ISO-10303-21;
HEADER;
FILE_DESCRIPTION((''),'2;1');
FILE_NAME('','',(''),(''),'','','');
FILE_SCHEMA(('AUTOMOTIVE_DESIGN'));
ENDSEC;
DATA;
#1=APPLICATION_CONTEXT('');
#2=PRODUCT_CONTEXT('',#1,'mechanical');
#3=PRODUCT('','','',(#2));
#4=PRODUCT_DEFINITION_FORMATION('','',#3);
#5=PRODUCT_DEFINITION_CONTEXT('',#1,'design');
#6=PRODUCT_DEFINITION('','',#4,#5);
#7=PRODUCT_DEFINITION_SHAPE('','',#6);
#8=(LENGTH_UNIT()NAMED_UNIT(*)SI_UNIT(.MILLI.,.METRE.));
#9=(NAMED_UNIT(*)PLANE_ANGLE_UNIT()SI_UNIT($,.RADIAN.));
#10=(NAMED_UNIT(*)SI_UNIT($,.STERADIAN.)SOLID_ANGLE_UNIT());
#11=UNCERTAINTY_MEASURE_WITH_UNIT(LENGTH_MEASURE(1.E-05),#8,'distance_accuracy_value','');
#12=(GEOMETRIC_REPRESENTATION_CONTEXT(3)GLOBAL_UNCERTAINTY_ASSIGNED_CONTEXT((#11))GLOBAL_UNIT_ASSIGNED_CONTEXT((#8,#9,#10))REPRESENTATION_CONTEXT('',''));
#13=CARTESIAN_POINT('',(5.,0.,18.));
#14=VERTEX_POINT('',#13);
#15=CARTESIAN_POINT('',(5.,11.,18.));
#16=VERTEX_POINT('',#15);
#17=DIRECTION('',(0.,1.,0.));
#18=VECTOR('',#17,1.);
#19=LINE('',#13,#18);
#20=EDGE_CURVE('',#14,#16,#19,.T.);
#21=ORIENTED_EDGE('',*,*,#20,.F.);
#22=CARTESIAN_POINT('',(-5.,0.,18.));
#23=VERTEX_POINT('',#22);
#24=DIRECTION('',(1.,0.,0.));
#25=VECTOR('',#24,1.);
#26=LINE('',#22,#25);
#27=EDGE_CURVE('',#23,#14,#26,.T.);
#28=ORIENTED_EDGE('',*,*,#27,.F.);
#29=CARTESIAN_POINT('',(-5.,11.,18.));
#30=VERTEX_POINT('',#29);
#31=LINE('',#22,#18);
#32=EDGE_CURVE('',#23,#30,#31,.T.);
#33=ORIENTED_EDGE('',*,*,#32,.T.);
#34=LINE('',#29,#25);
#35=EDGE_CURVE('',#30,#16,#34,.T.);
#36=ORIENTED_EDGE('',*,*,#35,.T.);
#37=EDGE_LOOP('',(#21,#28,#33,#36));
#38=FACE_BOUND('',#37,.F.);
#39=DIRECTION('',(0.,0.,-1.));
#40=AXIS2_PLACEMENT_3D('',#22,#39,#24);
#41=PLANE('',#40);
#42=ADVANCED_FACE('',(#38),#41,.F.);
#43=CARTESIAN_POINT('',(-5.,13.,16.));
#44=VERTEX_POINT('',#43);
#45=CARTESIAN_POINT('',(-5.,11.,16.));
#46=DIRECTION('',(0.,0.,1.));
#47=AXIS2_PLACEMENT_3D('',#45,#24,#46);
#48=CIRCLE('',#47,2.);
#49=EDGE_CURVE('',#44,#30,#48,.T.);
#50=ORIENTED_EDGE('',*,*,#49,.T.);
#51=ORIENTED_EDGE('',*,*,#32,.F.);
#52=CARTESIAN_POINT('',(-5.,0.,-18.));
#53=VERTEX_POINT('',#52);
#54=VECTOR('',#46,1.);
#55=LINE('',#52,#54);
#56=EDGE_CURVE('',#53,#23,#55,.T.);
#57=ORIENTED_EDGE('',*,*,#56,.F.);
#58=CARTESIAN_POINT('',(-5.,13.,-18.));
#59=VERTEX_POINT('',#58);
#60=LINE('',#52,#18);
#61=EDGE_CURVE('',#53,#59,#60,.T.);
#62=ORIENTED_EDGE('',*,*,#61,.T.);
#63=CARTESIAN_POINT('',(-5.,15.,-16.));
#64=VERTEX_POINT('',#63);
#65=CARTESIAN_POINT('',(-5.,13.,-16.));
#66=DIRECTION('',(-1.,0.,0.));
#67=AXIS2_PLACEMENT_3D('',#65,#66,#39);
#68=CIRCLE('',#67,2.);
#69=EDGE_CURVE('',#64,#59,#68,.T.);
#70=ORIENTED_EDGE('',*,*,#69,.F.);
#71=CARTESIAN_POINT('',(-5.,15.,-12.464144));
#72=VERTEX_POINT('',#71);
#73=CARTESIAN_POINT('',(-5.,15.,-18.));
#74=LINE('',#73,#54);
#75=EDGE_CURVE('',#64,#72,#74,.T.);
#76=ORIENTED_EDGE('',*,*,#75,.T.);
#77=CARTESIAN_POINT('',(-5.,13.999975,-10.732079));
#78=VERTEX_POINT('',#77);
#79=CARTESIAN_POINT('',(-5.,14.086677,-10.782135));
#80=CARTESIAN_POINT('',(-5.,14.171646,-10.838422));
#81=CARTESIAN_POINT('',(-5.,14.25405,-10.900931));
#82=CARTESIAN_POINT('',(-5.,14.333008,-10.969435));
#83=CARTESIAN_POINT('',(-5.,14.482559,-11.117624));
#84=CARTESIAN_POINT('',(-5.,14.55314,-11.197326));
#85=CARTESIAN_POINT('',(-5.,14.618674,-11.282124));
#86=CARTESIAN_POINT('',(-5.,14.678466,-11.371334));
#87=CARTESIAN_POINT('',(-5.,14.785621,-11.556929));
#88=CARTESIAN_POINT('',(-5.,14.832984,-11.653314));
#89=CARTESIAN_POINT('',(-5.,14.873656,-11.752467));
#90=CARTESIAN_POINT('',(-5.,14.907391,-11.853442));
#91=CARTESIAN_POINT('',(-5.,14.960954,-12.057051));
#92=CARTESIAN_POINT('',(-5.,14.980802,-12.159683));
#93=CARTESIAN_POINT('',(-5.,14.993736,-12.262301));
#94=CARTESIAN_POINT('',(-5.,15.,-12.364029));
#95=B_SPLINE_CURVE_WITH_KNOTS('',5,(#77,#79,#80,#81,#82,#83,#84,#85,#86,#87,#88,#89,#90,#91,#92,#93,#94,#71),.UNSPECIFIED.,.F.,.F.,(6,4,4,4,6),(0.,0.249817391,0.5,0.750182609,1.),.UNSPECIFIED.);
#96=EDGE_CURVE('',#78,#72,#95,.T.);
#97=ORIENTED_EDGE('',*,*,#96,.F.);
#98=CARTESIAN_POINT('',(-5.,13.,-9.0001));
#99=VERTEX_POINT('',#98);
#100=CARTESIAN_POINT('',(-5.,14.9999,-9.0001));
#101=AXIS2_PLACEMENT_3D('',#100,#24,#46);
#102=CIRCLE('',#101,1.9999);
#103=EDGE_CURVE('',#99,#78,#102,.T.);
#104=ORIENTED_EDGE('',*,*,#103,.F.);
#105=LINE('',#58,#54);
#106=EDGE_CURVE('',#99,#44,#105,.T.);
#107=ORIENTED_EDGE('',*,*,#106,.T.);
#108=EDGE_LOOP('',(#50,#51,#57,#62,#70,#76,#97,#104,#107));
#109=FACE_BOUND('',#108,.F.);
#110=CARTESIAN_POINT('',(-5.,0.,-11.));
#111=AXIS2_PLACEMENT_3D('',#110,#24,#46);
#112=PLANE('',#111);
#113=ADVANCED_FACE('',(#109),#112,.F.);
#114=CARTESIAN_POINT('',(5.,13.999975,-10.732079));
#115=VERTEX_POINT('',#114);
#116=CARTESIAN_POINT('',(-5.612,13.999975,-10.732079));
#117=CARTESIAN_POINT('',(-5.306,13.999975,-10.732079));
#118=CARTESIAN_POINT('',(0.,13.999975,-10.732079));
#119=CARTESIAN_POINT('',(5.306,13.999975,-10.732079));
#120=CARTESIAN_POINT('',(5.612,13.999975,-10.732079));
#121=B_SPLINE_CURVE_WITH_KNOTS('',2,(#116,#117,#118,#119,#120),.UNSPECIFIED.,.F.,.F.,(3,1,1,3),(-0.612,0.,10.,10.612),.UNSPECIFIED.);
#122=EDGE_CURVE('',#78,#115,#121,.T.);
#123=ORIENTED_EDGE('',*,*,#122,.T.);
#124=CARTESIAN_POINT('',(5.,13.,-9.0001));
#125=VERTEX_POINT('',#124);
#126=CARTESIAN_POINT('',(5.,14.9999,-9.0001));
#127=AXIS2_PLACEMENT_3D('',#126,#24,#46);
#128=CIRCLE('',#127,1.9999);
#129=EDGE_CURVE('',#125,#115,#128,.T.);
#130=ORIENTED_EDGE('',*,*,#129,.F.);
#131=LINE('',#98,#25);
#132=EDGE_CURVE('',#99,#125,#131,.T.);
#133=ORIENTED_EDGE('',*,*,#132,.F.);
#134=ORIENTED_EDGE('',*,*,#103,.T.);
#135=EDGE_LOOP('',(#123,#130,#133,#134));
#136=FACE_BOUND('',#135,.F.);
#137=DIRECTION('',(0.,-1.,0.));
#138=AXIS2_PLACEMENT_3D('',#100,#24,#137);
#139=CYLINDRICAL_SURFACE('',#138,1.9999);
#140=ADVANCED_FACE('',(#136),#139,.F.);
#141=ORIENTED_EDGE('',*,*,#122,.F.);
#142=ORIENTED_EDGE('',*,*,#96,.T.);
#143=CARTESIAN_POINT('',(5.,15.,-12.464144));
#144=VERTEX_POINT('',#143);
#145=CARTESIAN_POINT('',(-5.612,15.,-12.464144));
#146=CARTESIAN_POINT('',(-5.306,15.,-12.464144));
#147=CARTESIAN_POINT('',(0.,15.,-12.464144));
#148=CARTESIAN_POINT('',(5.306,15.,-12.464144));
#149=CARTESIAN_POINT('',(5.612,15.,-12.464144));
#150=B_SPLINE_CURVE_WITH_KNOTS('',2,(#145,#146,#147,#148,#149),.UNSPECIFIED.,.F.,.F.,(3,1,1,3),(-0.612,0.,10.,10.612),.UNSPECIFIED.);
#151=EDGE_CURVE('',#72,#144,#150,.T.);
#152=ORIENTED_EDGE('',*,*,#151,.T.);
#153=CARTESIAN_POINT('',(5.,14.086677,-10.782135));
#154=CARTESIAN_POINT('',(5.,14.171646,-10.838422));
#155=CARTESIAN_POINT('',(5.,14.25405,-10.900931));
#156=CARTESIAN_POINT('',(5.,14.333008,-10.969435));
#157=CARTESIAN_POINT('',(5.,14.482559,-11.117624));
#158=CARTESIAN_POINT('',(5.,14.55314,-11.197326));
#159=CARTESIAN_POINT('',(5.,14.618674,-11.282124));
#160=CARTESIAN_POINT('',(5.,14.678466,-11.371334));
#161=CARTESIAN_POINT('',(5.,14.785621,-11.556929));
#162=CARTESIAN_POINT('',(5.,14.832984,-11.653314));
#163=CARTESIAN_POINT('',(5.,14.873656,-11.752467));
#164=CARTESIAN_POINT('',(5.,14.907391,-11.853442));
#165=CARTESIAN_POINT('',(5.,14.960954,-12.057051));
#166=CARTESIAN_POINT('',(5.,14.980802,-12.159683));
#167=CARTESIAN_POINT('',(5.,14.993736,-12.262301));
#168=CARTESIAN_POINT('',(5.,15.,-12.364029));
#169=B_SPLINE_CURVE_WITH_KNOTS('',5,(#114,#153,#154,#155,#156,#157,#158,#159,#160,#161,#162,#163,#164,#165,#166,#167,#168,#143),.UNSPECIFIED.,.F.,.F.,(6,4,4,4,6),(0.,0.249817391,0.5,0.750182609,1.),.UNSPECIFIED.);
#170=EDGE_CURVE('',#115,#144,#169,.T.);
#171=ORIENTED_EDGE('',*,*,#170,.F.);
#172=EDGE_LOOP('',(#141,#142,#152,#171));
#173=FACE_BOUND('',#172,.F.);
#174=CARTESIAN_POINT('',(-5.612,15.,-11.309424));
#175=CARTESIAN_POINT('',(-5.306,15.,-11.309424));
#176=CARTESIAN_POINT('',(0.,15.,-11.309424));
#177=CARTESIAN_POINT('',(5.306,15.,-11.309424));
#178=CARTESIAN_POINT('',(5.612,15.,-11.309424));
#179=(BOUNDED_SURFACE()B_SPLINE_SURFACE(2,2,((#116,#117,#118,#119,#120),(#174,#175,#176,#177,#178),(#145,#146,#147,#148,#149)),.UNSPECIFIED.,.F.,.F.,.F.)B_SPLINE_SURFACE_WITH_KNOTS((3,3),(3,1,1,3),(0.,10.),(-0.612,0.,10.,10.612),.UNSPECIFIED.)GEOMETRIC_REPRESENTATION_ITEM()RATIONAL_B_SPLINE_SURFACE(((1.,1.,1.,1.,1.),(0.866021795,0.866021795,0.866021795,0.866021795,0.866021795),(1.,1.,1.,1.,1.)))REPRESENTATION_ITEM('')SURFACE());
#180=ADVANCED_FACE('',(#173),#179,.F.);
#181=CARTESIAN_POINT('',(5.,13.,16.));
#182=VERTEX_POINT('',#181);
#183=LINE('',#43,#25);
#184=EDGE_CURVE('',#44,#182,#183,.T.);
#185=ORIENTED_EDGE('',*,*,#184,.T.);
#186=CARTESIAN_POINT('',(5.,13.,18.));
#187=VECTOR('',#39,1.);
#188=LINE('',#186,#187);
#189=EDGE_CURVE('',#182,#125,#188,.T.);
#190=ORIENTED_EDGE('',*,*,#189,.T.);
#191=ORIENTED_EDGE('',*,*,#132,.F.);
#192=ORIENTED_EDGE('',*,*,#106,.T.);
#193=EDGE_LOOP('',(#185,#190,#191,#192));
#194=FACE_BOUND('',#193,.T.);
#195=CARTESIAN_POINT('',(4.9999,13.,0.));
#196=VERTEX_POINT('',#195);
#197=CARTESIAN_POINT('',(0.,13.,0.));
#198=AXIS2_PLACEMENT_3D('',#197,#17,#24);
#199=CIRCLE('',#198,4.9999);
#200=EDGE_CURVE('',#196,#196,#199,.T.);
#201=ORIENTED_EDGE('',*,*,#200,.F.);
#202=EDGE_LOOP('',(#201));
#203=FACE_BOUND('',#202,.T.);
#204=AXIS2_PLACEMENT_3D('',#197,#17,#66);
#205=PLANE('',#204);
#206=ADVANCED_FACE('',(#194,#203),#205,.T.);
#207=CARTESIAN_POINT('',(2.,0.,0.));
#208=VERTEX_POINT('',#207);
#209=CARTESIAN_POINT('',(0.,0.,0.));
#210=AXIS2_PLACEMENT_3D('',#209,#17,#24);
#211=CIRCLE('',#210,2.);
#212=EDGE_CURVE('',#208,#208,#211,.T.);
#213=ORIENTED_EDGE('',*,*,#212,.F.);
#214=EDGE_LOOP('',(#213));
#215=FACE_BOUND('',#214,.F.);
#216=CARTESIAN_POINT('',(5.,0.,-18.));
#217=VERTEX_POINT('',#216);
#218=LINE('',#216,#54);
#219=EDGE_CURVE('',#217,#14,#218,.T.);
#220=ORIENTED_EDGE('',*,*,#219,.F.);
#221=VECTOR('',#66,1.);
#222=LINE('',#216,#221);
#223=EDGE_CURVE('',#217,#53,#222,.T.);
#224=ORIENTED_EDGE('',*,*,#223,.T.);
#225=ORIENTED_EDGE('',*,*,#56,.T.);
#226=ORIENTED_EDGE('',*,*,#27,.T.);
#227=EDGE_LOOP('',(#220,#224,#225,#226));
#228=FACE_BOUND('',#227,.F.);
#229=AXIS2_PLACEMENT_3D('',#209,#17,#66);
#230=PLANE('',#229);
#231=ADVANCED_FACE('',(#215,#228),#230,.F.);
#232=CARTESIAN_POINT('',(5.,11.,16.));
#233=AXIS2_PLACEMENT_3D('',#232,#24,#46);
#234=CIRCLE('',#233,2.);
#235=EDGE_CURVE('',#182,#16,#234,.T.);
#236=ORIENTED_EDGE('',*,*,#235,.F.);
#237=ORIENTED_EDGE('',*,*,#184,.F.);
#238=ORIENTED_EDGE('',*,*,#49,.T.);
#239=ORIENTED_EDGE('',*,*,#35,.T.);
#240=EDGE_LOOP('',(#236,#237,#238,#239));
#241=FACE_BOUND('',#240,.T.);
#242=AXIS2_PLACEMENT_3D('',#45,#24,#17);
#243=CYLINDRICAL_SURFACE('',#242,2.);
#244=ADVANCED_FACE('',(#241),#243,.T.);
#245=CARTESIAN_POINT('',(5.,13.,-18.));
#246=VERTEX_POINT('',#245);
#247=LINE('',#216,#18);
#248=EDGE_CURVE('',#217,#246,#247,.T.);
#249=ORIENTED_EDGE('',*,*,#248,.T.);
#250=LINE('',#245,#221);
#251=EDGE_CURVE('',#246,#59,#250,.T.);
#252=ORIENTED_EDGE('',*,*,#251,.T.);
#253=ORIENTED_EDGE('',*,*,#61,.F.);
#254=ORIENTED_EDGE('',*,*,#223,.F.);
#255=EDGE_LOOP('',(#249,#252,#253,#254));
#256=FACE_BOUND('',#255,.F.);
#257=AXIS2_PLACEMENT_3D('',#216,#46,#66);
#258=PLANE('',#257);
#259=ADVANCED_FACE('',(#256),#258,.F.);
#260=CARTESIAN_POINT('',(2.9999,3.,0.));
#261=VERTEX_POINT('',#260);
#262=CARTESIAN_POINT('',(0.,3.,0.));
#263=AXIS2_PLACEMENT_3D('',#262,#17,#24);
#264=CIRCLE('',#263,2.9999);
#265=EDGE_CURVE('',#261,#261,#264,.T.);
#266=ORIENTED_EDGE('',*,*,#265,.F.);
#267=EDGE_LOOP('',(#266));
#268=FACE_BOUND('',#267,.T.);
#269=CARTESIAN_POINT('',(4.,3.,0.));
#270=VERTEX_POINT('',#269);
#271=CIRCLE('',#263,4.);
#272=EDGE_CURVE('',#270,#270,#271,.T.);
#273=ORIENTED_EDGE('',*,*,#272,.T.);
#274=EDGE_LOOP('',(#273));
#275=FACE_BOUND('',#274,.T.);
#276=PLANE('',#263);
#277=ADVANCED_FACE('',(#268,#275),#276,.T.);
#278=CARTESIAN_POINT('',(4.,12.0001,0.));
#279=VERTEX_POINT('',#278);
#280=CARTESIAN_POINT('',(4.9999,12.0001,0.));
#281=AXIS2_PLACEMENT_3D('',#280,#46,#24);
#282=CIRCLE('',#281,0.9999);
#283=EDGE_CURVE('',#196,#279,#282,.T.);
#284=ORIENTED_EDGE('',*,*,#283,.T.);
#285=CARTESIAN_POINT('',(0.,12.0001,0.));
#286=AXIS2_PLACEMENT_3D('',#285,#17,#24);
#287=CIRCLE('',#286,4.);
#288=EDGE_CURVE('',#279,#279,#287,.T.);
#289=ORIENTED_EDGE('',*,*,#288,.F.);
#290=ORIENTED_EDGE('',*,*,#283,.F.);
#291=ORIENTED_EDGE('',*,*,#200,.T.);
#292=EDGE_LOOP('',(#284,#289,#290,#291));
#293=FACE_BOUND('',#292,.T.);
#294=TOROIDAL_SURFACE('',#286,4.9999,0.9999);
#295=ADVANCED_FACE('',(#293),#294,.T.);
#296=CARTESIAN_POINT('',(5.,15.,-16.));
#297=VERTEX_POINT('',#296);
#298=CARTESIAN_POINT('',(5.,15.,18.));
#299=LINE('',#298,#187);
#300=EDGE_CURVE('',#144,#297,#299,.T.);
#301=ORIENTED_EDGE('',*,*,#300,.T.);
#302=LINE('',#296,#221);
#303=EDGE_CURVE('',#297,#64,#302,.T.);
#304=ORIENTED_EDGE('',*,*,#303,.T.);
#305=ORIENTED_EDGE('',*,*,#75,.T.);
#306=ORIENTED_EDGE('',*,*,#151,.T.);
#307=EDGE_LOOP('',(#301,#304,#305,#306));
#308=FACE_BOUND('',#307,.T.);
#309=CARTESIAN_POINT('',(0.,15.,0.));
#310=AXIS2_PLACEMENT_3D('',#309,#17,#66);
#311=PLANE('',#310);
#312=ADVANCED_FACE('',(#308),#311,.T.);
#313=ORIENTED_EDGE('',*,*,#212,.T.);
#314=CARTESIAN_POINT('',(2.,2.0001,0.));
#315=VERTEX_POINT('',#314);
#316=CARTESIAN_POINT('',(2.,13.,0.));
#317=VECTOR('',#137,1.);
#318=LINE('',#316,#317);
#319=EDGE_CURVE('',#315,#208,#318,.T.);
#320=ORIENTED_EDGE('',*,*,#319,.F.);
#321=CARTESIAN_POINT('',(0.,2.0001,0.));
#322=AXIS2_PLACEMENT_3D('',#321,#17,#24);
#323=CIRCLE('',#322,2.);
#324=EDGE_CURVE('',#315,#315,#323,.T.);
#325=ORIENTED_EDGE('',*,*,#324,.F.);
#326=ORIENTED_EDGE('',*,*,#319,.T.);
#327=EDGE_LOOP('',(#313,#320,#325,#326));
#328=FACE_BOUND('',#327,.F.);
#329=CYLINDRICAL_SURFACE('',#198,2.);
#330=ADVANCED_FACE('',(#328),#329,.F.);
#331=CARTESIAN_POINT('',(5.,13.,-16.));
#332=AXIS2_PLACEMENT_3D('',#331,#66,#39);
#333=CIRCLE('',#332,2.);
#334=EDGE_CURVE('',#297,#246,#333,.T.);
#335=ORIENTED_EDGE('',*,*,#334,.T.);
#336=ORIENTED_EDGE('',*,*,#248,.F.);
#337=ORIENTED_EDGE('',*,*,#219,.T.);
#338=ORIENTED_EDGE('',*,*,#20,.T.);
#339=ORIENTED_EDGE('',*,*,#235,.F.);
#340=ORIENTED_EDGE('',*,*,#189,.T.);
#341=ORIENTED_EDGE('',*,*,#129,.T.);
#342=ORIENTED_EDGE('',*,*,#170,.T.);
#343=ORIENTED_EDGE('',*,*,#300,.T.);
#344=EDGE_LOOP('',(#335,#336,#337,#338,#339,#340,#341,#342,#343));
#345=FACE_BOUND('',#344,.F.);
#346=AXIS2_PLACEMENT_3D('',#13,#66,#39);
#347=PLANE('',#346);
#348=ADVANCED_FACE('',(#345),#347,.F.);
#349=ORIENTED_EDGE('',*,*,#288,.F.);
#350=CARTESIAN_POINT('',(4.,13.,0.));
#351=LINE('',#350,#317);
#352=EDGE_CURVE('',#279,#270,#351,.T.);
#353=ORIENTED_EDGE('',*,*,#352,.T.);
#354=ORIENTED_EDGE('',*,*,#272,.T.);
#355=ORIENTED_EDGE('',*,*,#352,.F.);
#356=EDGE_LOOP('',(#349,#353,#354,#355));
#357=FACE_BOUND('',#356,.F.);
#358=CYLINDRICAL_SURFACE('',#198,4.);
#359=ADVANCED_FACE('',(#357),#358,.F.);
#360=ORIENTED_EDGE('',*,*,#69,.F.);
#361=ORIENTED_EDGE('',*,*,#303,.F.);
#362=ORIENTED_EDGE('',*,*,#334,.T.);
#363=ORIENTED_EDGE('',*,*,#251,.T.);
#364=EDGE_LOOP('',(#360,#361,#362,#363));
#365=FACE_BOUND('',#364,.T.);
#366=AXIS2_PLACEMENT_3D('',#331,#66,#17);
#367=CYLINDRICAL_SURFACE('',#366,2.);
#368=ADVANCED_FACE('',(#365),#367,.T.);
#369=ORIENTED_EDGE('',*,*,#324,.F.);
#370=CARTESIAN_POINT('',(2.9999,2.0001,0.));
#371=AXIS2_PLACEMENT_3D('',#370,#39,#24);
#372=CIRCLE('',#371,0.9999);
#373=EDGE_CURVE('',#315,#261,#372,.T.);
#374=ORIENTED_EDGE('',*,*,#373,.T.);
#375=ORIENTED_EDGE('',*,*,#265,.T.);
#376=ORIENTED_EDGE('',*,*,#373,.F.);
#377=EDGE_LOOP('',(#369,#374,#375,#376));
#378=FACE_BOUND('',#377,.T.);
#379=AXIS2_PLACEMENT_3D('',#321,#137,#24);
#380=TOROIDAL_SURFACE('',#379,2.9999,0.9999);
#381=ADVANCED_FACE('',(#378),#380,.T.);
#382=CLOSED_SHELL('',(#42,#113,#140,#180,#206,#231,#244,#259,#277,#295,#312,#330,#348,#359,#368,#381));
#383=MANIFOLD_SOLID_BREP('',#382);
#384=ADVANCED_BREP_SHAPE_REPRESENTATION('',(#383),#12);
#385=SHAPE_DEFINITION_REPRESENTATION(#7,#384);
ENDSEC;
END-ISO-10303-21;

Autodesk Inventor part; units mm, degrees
ref_plane "YZ Plane" through (0, 0, 0) normal (1, 0, 0) x (0, 1, 0)
ref_plane "XZ Plane" through (0, 0, 0) normal (0, 1, 0) x (-1, 0, 0)
ref_plane "XY Plane" through (0, 0, 0) normal (0, 0, 1) x (1, 0, 0)
sketch "Sketch1" plane through (0, 0, 0) normal (0, 1, 0) x (-1, 0, 0)
  line L0 (5, 18) -> (-5, 18)
  line L1 (-5, 18) -> (-5, -18)
  line L2 (-5, -18) -> (5, -18)
  line L3 (5, -18) -> (5, 18)
  line L4 (5, 18) -> (-5, -18) construction
  line L5 (-5, 18) -> (5, -18) construction
  line L6 (5, -18) -> (5, -11)
  line L7 (5, -11) -> (-5, -11)
  point P0 (0, 0)
  dimension "d0" = 10
  dimension "d1" = 36
  dimension "d2" = 7
extrude "Extrusion1" add sketch "Sketch1" along normal blind 13 contours L3 L7 L1 L0
extrude "Extrusion2" add sketch "Sketch1" along normal blind 15 contours L3 L2 L1 L7
fillet "Fillet1" radius 2 4 edges at (0, 15, -11) (0, 13, -11) (0, 15, -18) (0, 13, 18)
sketch "Sketch2" plane through (0, 13, 0) normal (0, 1, 0) x (1, 0, 0)
  circle A0 centre (0, 0) radius 4
  circle A1 centre (0, 0) radius 2
  dimension "d8" = 8
  dimension "d9" = 4
extrude "Extrusion3" cut sketch "Sketch2" against normal blind 15 contours A1
extrude "Extrusion4" cut sketch "Sketch2" against normal blind 10
fillet "Fillet2" radius 1 2 edges at (-2, 3, 0) (-4, 13, 0)
properties part number "vacuum_bin_standoff"
